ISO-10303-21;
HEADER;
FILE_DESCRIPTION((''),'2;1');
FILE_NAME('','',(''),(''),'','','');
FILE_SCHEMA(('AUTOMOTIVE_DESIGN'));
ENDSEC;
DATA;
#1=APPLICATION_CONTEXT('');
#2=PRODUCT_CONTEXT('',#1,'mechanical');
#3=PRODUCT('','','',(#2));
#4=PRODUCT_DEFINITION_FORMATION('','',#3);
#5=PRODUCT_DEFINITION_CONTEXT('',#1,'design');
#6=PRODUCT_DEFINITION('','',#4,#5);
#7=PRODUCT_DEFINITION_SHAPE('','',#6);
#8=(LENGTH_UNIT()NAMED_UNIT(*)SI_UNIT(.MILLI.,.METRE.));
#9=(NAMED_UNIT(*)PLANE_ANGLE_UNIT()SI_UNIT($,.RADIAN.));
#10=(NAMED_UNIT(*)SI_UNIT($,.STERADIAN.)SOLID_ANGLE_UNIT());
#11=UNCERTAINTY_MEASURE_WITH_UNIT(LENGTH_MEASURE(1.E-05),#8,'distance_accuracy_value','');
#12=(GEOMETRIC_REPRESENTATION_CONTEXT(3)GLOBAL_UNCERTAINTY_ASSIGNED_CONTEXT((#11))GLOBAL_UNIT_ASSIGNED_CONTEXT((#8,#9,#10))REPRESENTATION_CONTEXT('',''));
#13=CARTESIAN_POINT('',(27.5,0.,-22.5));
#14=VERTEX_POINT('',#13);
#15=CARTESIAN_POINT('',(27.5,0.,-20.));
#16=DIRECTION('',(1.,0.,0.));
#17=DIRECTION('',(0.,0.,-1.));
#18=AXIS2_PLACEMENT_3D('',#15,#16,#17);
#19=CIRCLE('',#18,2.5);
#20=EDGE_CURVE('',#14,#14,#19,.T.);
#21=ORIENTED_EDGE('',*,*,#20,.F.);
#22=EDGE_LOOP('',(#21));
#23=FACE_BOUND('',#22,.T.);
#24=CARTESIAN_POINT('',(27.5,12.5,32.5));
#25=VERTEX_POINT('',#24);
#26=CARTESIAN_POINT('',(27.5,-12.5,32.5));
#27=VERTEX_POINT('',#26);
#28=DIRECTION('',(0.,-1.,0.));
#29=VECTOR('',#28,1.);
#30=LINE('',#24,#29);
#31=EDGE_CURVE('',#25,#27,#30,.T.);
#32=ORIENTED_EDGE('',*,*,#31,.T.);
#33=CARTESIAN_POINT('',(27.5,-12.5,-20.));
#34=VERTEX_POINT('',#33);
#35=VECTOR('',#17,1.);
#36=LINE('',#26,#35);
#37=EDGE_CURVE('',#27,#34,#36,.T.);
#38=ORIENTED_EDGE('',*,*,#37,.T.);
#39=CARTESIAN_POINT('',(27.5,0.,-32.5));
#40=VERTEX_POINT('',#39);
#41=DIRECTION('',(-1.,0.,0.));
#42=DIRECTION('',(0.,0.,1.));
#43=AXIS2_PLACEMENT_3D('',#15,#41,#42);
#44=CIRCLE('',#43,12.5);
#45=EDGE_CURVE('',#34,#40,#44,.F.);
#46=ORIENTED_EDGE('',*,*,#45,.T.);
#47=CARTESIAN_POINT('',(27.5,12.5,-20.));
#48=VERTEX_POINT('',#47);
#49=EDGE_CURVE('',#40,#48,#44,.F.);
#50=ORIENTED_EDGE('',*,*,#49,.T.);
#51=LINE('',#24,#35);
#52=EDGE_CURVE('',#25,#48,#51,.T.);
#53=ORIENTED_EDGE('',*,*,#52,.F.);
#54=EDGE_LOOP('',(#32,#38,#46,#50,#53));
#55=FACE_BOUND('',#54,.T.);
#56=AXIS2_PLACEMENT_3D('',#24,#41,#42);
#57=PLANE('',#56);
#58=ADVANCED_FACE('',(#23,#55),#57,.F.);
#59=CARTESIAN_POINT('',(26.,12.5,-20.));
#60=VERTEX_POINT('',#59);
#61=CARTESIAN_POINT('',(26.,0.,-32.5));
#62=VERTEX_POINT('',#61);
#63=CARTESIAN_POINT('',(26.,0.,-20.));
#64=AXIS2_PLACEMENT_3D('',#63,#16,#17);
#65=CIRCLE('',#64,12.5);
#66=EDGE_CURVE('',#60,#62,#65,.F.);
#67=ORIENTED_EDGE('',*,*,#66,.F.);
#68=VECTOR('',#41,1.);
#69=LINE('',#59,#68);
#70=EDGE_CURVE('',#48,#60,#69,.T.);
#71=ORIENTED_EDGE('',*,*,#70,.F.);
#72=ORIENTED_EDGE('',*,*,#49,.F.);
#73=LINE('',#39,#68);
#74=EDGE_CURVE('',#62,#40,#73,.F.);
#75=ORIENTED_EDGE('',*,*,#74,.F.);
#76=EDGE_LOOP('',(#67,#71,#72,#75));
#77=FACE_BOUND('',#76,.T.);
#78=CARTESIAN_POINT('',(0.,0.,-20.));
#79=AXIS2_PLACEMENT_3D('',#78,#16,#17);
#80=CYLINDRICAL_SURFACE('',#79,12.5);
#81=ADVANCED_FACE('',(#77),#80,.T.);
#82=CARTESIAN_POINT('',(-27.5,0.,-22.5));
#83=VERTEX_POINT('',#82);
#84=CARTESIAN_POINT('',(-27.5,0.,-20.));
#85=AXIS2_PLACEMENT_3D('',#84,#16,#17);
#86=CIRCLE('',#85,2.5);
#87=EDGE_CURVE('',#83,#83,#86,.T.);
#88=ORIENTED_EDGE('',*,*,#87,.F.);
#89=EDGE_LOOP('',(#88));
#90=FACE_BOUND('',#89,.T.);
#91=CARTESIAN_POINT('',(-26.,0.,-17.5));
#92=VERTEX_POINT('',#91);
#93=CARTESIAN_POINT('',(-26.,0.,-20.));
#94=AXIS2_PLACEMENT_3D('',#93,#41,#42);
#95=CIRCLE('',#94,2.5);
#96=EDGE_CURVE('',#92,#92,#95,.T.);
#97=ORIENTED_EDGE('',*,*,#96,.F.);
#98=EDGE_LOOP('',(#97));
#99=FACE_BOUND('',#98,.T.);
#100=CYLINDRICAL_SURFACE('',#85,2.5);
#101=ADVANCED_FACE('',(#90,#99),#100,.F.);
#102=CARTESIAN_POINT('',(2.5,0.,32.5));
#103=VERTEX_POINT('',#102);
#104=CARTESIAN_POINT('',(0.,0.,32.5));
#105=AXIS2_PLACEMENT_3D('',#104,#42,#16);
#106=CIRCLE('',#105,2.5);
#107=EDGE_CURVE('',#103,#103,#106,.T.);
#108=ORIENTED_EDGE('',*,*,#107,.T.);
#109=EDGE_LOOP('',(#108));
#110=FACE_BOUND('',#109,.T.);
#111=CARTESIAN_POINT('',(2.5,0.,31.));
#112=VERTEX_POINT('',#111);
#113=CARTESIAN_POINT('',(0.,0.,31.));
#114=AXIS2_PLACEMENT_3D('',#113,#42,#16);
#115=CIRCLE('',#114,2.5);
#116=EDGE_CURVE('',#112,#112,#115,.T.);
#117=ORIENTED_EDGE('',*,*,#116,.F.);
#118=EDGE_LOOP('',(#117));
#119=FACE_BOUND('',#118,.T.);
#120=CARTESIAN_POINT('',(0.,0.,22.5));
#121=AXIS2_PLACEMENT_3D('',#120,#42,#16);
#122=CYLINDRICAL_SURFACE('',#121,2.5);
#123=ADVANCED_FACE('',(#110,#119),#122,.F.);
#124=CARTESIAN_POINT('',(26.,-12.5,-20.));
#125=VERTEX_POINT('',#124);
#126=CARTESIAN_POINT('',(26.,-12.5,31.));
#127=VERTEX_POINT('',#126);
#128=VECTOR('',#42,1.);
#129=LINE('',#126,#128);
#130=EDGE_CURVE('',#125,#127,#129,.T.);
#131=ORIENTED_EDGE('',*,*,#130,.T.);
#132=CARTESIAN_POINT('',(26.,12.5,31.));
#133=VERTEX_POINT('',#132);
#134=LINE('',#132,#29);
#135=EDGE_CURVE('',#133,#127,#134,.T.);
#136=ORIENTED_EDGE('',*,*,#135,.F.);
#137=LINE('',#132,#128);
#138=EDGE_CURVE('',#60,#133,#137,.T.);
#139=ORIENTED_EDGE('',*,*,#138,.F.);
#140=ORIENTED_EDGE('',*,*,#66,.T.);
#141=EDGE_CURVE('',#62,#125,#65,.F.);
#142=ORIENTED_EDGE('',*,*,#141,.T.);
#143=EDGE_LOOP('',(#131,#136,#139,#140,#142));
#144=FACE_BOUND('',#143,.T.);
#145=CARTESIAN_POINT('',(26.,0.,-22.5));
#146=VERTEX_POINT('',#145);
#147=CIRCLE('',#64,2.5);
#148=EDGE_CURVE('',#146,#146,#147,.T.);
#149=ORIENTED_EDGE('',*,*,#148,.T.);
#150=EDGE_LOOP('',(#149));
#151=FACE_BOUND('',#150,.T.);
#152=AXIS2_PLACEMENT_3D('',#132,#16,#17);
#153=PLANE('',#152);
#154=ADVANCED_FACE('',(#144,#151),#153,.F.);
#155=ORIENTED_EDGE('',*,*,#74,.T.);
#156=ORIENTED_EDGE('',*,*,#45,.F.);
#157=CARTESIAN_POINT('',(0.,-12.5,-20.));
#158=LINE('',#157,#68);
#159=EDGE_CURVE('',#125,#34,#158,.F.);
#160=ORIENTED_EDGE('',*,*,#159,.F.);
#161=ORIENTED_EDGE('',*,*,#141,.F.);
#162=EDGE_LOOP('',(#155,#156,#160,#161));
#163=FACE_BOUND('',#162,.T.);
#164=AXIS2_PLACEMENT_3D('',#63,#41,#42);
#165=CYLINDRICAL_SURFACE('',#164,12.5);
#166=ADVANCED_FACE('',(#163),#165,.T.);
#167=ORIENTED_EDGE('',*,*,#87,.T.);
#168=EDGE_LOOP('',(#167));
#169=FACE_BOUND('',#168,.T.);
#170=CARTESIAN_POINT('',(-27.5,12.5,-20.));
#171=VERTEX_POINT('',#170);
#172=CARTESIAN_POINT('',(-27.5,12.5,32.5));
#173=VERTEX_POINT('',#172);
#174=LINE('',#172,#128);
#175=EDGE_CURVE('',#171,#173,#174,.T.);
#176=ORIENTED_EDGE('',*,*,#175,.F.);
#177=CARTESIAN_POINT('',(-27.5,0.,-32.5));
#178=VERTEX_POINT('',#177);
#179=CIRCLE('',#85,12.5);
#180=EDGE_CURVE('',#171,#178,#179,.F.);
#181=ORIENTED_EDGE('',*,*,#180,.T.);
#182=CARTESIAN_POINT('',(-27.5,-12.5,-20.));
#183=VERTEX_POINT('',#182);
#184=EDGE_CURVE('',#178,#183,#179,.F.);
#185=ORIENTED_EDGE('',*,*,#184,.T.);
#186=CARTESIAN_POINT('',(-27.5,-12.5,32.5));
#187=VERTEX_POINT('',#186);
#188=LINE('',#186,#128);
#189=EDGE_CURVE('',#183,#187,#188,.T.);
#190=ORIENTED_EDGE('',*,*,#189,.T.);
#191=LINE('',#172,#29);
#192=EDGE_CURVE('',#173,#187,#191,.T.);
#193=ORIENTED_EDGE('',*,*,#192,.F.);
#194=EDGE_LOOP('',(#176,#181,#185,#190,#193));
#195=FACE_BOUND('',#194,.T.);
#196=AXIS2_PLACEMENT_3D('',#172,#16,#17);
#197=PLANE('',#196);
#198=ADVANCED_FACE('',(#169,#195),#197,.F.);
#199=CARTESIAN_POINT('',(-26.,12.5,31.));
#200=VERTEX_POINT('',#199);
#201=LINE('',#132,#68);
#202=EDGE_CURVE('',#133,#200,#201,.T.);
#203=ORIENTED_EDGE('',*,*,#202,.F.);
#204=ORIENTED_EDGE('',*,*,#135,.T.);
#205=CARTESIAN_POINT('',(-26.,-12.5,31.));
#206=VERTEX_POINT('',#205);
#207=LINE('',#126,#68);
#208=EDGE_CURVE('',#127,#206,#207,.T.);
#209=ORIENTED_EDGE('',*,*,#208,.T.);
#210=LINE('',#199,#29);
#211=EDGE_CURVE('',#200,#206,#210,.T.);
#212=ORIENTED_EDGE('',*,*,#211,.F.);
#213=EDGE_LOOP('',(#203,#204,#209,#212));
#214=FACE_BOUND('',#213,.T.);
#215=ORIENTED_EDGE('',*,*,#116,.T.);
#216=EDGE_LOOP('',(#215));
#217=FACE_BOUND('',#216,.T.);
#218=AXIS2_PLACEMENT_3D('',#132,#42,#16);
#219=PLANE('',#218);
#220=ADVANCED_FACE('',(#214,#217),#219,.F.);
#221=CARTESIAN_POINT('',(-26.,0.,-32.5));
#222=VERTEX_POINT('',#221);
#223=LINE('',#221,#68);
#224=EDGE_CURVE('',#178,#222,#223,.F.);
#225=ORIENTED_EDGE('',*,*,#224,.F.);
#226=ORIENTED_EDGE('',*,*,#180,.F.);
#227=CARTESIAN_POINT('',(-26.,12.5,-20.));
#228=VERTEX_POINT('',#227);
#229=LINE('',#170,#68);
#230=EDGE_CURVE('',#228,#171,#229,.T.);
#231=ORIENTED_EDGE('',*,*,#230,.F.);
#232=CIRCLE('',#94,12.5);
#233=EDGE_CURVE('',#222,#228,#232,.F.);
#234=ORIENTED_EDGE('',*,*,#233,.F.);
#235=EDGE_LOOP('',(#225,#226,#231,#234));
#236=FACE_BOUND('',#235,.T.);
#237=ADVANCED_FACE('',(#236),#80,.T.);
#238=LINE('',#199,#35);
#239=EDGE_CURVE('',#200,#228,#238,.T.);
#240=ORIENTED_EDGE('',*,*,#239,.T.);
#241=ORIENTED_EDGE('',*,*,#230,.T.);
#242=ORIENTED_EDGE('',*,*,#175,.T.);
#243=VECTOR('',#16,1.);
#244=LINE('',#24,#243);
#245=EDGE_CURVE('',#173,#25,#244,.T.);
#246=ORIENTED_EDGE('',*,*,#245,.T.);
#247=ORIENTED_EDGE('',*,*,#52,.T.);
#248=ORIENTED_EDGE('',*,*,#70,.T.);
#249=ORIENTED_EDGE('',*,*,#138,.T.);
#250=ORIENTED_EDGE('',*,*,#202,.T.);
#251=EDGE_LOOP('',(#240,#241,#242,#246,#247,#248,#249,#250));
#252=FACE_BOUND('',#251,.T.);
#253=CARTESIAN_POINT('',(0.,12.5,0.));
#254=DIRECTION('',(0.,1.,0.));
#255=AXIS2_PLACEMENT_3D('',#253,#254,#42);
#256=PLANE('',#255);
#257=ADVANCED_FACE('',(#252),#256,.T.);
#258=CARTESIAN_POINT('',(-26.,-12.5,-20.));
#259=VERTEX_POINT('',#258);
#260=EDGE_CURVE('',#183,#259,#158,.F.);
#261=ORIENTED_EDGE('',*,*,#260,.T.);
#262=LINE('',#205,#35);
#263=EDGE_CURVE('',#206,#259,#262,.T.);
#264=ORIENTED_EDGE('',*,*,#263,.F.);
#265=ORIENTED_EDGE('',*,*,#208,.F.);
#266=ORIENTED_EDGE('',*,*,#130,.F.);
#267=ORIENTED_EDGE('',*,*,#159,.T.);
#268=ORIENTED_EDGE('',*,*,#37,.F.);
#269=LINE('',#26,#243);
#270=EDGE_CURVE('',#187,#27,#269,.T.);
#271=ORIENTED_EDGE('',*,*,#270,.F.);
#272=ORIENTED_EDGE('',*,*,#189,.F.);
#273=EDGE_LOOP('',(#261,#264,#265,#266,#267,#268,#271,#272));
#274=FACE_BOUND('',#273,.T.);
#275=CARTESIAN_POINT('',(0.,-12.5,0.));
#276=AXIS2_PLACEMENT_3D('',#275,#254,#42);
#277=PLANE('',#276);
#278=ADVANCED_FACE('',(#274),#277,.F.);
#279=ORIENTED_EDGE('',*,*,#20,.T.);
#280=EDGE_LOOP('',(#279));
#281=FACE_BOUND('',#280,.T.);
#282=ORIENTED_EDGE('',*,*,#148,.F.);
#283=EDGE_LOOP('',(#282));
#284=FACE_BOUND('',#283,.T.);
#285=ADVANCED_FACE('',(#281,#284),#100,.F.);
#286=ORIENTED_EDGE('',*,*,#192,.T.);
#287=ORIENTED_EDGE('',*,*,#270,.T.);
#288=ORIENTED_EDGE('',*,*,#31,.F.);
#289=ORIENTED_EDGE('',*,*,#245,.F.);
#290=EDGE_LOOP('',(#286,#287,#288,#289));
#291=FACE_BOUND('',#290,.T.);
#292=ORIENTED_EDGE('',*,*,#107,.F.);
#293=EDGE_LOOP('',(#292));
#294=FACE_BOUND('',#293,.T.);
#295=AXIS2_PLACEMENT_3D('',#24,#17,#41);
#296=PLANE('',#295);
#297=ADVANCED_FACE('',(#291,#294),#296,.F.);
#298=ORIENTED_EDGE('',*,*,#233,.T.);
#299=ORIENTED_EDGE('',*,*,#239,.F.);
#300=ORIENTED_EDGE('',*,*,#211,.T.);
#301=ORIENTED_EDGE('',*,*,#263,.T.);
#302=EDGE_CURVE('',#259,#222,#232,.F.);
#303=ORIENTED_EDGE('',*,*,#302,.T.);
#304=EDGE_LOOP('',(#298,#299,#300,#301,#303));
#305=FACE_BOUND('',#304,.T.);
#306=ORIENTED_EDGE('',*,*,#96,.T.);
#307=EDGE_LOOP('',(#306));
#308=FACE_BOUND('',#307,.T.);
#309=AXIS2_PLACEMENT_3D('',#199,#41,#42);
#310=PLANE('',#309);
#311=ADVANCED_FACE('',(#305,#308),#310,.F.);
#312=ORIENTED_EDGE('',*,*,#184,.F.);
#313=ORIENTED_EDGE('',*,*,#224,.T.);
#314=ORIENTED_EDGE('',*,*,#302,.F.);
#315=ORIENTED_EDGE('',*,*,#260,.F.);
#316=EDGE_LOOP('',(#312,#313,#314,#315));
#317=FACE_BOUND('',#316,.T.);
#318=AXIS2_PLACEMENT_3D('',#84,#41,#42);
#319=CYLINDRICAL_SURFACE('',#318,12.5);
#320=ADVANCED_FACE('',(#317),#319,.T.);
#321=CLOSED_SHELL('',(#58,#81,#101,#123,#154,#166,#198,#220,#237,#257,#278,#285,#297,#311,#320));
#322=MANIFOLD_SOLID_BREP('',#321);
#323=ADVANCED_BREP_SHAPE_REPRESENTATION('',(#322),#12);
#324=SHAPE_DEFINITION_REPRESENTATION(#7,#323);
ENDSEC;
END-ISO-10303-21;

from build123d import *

# Parameters (mm, degrees)
BOSS_EXTRUDE1_DEPTH     = 12.5
FILLET1_R               = 12.5
CUT_EXTRUDE1_DEPTH      = 45.370598373
CUT_EXTRUDE1_DEPTH_BACK = 45.370598373
SKETCH2_R               = 2.5
SKETCH3_R               = 2.5
CUT_EXTRUDE2_DEPTH      = 10


with BuildPart() as part:
    # Sketch1 → Boss-Extrude1 (new, symmetric)
    with BuildSketch(Plane(origin=(0, 0, 0), x_dir=(1, 0, 0), z_dir=(0, 1, 0))):
        Polygon((26, -31), (26, 32.5), (27.5, 32.5), (27.5, -32.5), (-27.5, -32.5), (-27.5, 32.5), (-26, 32.5), (-26, -31), align=None)
    extrude(amount=BOSS_EXTRUDE1_DEPTH, both=True)

    # Fillet1
    fillet1_edges = [part.edges().sort_by_distance(p)[0] for p in [
        (-26.75, -12.5, -32.5),
        (-26.75, 12.5, -32.5),
        (26.75, -12.5, -32.5),
        (26.75, 12.5, -32.5),
    ]]
    fillet(fillet1_edges, radius=FILLET1_R - 0.0001)  # a hair under: the kernel refuses the full size

    # Sketch2 → Cut-Extrude1 (cut, two sides: drawn at the far end of the back side and taken through both)
    with BuildSketch(Plane(origin=(0, 0, 0), x_dir=(0, 0, -1), z_dir=(1, 0, 0)).offset(-CUT_EXTRUDE1_DEPTH_BACK)):
        with Locations((20, 0)):
            Circle(SKETCH2_R)
    extrude(amount=CUT_EXTRUDE1_DEPTH + CUT_EXTRUDE1_DEPTH_BACK, mode=Mode.SUBTRACT)

    # Sketch3 → Cut-Extrude2 (cut)
    with BuildSketch(Plane.XY.offset(32.5)):
        Circle(SKETCH3_R)
    extrude(amount=-CUT_EXTRUDE2_DEPTH, mode=Mode.SUBTRACT)


solid = part.part
